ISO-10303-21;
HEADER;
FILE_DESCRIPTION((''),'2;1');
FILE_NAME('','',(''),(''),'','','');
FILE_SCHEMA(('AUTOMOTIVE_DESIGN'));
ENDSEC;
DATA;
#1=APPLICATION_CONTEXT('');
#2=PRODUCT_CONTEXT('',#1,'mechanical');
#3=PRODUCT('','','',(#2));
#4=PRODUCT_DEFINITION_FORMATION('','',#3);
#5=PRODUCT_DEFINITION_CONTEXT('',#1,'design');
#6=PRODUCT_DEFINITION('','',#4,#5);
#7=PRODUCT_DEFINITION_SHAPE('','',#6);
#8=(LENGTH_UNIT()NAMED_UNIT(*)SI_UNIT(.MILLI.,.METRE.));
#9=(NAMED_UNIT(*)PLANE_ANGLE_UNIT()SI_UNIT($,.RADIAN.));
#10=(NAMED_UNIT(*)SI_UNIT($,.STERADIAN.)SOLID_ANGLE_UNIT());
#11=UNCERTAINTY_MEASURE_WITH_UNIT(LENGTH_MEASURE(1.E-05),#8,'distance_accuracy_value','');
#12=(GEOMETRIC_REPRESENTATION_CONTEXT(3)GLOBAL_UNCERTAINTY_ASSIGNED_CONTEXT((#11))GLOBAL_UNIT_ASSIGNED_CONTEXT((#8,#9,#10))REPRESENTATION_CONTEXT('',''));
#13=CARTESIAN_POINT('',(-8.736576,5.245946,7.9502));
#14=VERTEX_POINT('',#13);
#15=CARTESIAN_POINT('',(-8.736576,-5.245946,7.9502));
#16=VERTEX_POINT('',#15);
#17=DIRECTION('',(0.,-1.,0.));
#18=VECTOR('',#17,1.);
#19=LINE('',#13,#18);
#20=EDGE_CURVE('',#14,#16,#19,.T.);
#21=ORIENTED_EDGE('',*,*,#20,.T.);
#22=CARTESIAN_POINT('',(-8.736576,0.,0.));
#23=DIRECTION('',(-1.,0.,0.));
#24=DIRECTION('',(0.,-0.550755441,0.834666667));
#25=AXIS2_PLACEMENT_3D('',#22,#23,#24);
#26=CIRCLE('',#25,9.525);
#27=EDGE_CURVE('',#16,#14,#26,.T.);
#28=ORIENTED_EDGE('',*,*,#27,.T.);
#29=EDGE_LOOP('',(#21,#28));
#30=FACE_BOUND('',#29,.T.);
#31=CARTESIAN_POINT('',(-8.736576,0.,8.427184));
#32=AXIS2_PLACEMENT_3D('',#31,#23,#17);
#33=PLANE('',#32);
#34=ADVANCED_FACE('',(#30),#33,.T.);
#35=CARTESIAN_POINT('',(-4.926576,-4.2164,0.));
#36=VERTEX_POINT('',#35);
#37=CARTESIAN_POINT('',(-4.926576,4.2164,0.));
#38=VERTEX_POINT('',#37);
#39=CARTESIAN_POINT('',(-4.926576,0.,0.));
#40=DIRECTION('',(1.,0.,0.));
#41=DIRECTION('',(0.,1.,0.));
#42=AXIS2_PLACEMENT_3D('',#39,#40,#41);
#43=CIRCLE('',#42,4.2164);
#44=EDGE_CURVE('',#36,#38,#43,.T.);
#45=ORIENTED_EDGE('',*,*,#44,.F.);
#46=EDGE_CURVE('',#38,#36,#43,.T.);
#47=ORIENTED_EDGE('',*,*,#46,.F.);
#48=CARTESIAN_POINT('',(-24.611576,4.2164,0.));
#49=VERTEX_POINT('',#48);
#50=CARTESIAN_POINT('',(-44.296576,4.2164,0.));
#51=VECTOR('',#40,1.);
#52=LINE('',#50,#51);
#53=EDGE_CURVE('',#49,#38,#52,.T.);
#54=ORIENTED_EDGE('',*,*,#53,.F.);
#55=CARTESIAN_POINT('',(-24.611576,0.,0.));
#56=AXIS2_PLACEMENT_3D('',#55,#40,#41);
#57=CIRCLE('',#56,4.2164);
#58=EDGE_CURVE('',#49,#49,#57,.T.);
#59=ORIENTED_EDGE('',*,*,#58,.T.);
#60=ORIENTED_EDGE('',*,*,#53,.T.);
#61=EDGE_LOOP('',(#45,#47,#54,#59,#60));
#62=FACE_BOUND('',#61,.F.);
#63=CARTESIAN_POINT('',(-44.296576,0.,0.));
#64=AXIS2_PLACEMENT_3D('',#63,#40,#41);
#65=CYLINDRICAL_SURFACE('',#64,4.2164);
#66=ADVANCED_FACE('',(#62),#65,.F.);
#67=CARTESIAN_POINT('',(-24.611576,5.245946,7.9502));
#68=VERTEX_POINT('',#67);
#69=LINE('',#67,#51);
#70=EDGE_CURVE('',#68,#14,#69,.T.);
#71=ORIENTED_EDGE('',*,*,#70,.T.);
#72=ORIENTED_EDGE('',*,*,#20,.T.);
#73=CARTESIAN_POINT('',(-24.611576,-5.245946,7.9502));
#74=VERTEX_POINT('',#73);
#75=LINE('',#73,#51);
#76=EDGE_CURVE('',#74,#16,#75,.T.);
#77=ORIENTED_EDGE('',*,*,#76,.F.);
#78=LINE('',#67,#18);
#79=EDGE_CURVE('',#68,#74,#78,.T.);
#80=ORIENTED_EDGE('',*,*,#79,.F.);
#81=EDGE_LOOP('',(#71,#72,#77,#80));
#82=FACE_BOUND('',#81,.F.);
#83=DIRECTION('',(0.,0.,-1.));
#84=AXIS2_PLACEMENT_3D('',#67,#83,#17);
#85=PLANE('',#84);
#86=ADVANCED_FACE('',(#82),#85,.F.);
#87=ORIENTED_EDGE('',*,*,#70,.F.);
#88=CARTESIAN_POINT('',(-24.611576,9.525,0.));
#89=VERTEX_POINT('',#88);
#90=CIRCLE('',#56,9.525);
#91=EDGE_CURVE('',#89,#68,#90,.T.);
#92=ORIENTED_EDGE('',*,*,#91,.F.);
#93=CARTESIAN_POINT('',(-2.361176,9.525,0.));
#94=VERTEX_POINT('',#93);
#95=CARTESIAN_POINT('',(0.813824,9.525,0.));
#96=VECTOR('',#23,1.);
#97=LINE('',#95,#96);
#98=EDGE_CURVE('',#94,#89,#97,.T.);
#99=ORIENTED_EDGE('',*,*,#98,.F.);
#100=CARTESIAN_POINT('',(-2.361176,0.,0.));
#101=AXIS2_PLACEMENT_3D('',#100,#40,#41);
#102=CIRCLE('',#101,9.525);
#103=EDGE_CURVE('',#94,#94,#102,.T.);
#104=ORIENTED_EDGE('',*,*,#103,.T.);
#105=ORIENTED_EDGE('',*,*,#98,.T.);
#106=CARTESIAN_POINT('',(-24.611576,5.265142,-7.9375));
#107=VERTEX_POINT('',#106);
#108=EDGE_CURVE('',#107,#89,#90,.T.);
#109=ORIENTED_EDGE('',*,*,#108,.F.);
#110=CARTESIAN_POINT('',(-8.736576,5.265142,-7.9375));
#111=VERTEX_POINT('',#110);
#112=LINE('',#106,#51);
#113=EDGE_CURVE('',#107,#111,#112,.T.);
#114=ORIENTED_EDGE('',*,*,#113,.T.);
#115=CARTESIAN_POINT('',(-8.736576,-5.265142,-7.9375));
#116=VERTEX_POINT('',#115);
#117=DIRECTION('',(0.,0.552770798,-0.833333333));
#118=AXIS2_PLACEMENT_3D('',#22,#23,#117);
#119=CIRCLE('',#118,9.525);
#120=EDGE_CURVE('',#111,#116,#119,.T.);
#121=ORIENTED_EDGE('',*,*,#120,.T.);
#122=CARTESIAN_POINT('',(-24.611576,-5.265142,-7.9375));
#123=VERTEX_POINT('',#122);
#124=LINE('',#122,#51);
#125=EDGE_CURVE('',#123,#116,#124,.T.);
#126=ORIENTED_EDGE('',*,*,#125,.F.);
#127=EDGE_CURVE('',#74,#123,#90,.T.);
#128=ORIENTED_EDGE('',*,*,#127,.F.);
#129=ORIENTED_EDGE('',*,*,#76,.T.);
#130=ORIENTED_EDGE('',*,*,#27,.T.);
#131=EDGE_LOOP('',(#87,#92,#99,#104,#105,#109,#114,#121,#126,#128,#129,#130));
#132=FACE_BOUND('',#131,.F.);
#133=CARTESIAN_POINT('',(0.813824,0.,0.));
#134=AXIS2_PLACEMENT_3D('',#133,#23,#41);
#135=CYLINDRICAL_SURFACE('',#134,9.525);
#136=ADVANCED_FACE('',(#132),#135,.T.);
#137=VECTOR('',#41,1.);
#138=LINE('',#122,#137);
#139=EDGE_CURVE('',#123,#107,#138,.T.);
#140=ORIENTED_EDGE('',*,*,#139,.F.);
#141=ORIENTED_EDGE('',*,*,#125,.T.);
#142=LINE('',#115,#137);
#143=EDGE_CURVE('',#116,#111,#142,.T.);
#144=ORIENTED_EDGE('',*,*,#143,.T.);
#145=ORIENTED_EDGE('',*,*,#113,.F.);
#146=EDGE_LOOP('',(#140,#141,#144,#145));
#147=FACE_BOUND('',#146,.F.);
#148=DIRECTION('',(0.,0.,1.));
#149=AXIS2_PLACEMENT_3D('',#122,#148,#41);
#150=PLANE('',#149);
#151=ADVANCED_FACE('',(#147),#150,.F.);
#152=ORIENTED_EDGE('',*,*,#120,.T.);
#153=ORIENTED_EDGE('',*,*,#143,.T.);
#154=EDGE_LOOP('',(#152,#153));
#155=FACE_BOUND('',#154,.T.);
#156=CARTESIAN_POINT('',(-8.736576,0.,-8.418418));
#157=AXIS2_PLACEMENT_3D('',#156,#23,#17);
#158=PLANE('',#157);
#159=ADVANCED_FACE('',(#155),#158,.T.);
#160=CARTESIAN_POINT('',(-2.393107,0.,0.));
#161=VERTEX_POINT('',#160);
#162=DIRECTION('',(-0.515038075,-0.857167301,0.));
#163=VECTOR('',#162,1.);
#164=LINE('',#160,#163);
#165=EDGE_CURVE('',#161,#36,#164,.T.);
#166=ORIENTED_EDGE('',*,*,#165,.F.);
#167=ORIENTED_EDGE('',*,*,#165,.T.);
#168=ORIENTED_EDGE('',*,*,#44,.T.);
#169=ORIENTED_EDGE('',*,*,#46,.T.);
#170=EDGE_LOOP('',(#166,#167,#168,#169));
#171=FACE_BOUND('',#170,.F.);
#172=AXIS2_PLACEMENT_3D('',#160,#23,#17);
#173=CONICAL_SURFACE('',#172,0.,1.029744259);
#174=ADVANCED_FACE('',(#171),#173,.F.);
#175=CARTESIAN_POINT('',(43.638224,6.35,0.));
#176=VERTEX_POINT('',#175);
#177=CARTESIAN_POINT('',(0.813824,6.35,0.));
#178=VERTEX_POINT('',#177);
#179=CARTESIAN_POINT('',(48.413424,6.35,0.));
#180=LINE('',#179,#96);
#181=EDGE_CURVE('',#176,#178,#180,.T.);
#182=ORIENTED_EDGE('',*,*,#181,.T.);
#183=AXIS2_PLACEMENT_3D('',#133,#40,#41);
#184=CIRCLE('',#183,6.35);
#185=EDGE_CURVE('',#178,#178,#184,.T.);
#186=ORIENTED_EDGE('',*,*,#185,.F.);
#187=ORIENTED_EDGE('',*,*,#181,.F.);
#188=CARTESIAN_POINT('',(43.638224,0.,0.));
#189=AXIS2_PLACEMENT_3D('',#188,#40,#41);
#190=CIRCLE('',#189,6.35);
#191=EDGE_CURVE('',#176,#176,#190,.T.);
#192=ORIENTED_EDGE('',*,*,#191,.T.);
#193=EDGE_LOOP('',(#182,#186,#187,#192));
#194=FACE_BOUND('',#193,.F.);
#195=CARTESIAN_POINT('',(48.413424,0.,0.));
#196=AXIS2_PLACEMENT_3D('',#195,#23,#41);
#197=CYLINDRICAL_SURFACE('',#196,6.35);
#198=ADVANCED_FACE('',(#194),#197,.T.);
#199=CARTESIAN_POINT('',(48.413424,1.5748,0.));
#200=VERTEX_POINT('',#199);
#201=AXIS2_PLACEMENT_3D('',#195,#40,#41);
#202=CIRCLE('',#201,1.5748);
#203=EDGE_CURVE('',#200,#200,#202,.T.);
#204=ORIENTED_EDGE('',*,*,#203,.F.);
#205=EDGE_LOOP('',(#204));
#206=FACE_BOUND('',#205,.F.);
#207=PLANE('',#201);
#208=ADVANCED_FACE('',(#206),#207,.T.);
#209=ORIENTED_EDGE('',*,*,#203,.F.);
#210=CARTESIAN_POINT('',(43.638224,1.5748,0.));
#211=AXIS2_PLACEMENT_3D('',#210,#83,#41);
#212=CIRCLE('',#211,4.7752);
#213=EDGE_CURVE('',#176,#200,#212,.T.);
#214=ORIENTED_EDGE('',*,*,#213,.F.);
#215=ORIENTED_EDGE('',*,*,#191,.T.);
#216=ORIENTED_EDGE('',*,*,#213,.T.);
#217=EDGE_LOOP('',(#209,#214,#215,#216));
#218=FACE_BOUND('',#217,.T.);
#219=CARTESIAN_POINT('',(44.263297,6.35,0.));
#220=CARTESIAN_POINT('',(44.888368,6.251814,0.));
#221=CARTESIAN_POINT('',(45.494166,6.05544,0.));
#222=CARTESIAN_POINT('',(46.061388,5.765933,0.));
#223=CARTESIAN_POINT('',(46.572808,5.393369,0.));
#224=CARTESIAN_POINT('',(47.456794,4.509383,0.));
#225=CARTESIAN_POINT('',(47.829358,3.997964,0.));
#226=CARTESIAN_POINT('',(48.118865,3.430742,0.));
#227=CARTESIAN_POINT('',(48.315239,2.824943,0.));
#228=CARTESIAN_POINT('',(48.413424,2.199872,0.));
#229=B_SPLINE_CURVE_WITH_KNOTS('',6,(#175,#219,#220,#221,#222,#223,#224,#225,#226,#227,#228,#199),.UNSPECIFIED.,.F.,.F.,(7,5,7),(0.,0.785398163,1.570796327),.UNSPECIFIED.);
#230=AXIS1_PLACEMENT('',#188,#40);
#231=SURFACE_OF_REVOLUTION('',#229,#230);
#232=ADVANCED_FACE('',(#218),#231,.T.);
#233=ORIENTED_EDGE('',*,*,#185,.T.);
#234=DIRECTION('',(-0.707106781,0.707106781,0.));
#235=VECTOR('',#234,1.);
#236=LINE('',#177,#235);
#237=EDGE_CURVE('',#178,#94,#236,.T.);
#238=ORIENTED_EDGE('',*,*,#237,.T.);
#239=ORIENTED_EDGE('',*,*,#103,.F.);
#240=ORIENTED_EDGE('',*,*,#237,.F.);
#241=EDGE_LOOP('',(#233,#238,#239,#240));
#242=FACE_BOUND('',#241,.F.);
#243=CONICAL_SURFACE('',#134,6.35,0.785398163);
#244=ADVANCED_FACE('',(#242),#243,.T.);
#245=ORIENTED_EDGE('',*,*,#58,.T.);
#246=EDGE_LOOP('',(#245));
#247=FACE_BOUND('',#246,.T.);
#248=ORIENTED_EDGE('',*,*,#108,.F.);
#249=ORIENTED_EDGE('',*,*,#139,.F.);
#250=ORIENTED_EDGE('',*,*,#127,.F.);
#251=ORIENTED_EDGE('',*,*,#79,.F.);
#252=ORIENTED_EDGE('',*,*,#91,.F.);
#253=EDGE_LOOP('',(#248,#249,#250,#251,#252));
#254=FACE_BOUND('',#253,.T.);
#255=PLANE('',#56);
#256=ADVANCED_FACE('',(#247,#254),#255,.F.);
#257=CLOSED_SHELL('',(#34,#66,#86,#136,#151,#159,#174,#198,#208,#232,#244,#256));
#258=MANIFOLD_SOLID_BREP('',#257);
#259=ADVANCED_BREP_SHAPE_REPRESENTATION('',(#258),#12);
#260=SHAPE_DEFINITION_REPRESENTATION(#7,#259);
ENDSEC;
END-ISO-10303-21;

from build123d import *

# Parameters (mm, degrees)
F0_W        = 15.4432
F0_H        = 9.525
F3_DEPTH    = 15.875
F4_R        = 4.7752
F5_S5_R     = 6.35
F5_T6_DEPTH = 15
F7_D        = 8.4328
F7_DEPTH    = 19.685
F7_TIP      = 2.5334687141


# Not quite as in the source:
# - a fillet or chamfer that OpenCascade refuses, or shapes differently, is made with other operations: its cross-section is extruded or revolved along the edge and cut away or added


with BuildPart() as f1:
    # F0 (on Top) → F1 (revolve)
    with BuildSketch(Plane.XY):
        with Locations((-16.8899756006, 4.7625)):
            Rectangle(F0_W, F0_H)
        Polygon((-9.1683756006, 9.525), (-9.1683756006, 0), (48.4134243994, 0), (48.4134243994, 6.35), (0.8138243994, 6.35), (0.8138243994, 9.525), align=None)
    revolve(axis=Axis((11.9009243994, 0, 0), (1, 0, 0)))

    # F2 (on face) → F3 (cut)
    with BuildSketch(Plane(origin=(-24.6115756006, 0, 0), x_dir=(0, -1, 0), z_dir=(-1, 0, 0))):
        with BuildLine():
            ThreePointArc((5.2459455735, 7.9502), (0, 9.525), (-5.2459455735, 7.9502))
            Line((-5.2459455735, 7.9502), (5.2459455735, 7.9502))
        make_face()
        with BuildLine():
            Line((5.2651418547, -7.9375), (-5.2651418547, -7.9375))
            ThreePointArc((-5.2651418547, -7.9375), (0, -9.525), (5.2651418547, -7.9375))
        make_face()
    extrude(amount=-F3_DEPTH, mode=Mode.SUBTRACT)

    # F4
    f4_edges = [f1.edges().sort_by_distance(p)[0] for p in [
        (48.413424, -6.35, 0),
    ]]
    fillet(f4_edges, radius=F4_R)

    # F5: chamfer of 3.175 on 1 edges, made by hand


with BuildPart() as f5_tool2:
    # F5_s3 → F5_t4 (revolve)
    with BuildSketch(Plane.XY):
        Polygon((0.8138243994, 6.35), (-2.3611756006, 9.525), (0.8138243994, 9.525), align=None)
    revolve(axis=Axis((0.8138243994, 0, 0), (1, 0, 0)))

    # F5_s5 → F5_t6 (cut, symmetric)
    with BuildSketch(Plane.YZ.offset(-0.8)):
        Circle(F5_S5_R)
    extrude(amount=F5_T6_DEPTH, both=True, mode=Mode.SUBTRACT)


with BuildPart() as f1_1:
    add(f1.part)

    # F5_t1: cut F5_tool2
    add(f5_tool2.part, mode=Mode.SUBTRACT)

    # F7
    with Locations(Plane(origin=(-24.6115756006, 0, 0), x_dir=(0, -1, 0), z_dir=(-1, 0, 0))):
        with Locations((0, 0)):
            Hole(F7_D / 2, depth=F7_DEPTH)
            with Locations((0, 0, -(F7_DEPTH + F7_TIP / 2))):  # 118° drill point
                Cone(0, F7_D / 2, F7_TIP, mode=Mode.SUBTRACT)


solid = f1_1.part
